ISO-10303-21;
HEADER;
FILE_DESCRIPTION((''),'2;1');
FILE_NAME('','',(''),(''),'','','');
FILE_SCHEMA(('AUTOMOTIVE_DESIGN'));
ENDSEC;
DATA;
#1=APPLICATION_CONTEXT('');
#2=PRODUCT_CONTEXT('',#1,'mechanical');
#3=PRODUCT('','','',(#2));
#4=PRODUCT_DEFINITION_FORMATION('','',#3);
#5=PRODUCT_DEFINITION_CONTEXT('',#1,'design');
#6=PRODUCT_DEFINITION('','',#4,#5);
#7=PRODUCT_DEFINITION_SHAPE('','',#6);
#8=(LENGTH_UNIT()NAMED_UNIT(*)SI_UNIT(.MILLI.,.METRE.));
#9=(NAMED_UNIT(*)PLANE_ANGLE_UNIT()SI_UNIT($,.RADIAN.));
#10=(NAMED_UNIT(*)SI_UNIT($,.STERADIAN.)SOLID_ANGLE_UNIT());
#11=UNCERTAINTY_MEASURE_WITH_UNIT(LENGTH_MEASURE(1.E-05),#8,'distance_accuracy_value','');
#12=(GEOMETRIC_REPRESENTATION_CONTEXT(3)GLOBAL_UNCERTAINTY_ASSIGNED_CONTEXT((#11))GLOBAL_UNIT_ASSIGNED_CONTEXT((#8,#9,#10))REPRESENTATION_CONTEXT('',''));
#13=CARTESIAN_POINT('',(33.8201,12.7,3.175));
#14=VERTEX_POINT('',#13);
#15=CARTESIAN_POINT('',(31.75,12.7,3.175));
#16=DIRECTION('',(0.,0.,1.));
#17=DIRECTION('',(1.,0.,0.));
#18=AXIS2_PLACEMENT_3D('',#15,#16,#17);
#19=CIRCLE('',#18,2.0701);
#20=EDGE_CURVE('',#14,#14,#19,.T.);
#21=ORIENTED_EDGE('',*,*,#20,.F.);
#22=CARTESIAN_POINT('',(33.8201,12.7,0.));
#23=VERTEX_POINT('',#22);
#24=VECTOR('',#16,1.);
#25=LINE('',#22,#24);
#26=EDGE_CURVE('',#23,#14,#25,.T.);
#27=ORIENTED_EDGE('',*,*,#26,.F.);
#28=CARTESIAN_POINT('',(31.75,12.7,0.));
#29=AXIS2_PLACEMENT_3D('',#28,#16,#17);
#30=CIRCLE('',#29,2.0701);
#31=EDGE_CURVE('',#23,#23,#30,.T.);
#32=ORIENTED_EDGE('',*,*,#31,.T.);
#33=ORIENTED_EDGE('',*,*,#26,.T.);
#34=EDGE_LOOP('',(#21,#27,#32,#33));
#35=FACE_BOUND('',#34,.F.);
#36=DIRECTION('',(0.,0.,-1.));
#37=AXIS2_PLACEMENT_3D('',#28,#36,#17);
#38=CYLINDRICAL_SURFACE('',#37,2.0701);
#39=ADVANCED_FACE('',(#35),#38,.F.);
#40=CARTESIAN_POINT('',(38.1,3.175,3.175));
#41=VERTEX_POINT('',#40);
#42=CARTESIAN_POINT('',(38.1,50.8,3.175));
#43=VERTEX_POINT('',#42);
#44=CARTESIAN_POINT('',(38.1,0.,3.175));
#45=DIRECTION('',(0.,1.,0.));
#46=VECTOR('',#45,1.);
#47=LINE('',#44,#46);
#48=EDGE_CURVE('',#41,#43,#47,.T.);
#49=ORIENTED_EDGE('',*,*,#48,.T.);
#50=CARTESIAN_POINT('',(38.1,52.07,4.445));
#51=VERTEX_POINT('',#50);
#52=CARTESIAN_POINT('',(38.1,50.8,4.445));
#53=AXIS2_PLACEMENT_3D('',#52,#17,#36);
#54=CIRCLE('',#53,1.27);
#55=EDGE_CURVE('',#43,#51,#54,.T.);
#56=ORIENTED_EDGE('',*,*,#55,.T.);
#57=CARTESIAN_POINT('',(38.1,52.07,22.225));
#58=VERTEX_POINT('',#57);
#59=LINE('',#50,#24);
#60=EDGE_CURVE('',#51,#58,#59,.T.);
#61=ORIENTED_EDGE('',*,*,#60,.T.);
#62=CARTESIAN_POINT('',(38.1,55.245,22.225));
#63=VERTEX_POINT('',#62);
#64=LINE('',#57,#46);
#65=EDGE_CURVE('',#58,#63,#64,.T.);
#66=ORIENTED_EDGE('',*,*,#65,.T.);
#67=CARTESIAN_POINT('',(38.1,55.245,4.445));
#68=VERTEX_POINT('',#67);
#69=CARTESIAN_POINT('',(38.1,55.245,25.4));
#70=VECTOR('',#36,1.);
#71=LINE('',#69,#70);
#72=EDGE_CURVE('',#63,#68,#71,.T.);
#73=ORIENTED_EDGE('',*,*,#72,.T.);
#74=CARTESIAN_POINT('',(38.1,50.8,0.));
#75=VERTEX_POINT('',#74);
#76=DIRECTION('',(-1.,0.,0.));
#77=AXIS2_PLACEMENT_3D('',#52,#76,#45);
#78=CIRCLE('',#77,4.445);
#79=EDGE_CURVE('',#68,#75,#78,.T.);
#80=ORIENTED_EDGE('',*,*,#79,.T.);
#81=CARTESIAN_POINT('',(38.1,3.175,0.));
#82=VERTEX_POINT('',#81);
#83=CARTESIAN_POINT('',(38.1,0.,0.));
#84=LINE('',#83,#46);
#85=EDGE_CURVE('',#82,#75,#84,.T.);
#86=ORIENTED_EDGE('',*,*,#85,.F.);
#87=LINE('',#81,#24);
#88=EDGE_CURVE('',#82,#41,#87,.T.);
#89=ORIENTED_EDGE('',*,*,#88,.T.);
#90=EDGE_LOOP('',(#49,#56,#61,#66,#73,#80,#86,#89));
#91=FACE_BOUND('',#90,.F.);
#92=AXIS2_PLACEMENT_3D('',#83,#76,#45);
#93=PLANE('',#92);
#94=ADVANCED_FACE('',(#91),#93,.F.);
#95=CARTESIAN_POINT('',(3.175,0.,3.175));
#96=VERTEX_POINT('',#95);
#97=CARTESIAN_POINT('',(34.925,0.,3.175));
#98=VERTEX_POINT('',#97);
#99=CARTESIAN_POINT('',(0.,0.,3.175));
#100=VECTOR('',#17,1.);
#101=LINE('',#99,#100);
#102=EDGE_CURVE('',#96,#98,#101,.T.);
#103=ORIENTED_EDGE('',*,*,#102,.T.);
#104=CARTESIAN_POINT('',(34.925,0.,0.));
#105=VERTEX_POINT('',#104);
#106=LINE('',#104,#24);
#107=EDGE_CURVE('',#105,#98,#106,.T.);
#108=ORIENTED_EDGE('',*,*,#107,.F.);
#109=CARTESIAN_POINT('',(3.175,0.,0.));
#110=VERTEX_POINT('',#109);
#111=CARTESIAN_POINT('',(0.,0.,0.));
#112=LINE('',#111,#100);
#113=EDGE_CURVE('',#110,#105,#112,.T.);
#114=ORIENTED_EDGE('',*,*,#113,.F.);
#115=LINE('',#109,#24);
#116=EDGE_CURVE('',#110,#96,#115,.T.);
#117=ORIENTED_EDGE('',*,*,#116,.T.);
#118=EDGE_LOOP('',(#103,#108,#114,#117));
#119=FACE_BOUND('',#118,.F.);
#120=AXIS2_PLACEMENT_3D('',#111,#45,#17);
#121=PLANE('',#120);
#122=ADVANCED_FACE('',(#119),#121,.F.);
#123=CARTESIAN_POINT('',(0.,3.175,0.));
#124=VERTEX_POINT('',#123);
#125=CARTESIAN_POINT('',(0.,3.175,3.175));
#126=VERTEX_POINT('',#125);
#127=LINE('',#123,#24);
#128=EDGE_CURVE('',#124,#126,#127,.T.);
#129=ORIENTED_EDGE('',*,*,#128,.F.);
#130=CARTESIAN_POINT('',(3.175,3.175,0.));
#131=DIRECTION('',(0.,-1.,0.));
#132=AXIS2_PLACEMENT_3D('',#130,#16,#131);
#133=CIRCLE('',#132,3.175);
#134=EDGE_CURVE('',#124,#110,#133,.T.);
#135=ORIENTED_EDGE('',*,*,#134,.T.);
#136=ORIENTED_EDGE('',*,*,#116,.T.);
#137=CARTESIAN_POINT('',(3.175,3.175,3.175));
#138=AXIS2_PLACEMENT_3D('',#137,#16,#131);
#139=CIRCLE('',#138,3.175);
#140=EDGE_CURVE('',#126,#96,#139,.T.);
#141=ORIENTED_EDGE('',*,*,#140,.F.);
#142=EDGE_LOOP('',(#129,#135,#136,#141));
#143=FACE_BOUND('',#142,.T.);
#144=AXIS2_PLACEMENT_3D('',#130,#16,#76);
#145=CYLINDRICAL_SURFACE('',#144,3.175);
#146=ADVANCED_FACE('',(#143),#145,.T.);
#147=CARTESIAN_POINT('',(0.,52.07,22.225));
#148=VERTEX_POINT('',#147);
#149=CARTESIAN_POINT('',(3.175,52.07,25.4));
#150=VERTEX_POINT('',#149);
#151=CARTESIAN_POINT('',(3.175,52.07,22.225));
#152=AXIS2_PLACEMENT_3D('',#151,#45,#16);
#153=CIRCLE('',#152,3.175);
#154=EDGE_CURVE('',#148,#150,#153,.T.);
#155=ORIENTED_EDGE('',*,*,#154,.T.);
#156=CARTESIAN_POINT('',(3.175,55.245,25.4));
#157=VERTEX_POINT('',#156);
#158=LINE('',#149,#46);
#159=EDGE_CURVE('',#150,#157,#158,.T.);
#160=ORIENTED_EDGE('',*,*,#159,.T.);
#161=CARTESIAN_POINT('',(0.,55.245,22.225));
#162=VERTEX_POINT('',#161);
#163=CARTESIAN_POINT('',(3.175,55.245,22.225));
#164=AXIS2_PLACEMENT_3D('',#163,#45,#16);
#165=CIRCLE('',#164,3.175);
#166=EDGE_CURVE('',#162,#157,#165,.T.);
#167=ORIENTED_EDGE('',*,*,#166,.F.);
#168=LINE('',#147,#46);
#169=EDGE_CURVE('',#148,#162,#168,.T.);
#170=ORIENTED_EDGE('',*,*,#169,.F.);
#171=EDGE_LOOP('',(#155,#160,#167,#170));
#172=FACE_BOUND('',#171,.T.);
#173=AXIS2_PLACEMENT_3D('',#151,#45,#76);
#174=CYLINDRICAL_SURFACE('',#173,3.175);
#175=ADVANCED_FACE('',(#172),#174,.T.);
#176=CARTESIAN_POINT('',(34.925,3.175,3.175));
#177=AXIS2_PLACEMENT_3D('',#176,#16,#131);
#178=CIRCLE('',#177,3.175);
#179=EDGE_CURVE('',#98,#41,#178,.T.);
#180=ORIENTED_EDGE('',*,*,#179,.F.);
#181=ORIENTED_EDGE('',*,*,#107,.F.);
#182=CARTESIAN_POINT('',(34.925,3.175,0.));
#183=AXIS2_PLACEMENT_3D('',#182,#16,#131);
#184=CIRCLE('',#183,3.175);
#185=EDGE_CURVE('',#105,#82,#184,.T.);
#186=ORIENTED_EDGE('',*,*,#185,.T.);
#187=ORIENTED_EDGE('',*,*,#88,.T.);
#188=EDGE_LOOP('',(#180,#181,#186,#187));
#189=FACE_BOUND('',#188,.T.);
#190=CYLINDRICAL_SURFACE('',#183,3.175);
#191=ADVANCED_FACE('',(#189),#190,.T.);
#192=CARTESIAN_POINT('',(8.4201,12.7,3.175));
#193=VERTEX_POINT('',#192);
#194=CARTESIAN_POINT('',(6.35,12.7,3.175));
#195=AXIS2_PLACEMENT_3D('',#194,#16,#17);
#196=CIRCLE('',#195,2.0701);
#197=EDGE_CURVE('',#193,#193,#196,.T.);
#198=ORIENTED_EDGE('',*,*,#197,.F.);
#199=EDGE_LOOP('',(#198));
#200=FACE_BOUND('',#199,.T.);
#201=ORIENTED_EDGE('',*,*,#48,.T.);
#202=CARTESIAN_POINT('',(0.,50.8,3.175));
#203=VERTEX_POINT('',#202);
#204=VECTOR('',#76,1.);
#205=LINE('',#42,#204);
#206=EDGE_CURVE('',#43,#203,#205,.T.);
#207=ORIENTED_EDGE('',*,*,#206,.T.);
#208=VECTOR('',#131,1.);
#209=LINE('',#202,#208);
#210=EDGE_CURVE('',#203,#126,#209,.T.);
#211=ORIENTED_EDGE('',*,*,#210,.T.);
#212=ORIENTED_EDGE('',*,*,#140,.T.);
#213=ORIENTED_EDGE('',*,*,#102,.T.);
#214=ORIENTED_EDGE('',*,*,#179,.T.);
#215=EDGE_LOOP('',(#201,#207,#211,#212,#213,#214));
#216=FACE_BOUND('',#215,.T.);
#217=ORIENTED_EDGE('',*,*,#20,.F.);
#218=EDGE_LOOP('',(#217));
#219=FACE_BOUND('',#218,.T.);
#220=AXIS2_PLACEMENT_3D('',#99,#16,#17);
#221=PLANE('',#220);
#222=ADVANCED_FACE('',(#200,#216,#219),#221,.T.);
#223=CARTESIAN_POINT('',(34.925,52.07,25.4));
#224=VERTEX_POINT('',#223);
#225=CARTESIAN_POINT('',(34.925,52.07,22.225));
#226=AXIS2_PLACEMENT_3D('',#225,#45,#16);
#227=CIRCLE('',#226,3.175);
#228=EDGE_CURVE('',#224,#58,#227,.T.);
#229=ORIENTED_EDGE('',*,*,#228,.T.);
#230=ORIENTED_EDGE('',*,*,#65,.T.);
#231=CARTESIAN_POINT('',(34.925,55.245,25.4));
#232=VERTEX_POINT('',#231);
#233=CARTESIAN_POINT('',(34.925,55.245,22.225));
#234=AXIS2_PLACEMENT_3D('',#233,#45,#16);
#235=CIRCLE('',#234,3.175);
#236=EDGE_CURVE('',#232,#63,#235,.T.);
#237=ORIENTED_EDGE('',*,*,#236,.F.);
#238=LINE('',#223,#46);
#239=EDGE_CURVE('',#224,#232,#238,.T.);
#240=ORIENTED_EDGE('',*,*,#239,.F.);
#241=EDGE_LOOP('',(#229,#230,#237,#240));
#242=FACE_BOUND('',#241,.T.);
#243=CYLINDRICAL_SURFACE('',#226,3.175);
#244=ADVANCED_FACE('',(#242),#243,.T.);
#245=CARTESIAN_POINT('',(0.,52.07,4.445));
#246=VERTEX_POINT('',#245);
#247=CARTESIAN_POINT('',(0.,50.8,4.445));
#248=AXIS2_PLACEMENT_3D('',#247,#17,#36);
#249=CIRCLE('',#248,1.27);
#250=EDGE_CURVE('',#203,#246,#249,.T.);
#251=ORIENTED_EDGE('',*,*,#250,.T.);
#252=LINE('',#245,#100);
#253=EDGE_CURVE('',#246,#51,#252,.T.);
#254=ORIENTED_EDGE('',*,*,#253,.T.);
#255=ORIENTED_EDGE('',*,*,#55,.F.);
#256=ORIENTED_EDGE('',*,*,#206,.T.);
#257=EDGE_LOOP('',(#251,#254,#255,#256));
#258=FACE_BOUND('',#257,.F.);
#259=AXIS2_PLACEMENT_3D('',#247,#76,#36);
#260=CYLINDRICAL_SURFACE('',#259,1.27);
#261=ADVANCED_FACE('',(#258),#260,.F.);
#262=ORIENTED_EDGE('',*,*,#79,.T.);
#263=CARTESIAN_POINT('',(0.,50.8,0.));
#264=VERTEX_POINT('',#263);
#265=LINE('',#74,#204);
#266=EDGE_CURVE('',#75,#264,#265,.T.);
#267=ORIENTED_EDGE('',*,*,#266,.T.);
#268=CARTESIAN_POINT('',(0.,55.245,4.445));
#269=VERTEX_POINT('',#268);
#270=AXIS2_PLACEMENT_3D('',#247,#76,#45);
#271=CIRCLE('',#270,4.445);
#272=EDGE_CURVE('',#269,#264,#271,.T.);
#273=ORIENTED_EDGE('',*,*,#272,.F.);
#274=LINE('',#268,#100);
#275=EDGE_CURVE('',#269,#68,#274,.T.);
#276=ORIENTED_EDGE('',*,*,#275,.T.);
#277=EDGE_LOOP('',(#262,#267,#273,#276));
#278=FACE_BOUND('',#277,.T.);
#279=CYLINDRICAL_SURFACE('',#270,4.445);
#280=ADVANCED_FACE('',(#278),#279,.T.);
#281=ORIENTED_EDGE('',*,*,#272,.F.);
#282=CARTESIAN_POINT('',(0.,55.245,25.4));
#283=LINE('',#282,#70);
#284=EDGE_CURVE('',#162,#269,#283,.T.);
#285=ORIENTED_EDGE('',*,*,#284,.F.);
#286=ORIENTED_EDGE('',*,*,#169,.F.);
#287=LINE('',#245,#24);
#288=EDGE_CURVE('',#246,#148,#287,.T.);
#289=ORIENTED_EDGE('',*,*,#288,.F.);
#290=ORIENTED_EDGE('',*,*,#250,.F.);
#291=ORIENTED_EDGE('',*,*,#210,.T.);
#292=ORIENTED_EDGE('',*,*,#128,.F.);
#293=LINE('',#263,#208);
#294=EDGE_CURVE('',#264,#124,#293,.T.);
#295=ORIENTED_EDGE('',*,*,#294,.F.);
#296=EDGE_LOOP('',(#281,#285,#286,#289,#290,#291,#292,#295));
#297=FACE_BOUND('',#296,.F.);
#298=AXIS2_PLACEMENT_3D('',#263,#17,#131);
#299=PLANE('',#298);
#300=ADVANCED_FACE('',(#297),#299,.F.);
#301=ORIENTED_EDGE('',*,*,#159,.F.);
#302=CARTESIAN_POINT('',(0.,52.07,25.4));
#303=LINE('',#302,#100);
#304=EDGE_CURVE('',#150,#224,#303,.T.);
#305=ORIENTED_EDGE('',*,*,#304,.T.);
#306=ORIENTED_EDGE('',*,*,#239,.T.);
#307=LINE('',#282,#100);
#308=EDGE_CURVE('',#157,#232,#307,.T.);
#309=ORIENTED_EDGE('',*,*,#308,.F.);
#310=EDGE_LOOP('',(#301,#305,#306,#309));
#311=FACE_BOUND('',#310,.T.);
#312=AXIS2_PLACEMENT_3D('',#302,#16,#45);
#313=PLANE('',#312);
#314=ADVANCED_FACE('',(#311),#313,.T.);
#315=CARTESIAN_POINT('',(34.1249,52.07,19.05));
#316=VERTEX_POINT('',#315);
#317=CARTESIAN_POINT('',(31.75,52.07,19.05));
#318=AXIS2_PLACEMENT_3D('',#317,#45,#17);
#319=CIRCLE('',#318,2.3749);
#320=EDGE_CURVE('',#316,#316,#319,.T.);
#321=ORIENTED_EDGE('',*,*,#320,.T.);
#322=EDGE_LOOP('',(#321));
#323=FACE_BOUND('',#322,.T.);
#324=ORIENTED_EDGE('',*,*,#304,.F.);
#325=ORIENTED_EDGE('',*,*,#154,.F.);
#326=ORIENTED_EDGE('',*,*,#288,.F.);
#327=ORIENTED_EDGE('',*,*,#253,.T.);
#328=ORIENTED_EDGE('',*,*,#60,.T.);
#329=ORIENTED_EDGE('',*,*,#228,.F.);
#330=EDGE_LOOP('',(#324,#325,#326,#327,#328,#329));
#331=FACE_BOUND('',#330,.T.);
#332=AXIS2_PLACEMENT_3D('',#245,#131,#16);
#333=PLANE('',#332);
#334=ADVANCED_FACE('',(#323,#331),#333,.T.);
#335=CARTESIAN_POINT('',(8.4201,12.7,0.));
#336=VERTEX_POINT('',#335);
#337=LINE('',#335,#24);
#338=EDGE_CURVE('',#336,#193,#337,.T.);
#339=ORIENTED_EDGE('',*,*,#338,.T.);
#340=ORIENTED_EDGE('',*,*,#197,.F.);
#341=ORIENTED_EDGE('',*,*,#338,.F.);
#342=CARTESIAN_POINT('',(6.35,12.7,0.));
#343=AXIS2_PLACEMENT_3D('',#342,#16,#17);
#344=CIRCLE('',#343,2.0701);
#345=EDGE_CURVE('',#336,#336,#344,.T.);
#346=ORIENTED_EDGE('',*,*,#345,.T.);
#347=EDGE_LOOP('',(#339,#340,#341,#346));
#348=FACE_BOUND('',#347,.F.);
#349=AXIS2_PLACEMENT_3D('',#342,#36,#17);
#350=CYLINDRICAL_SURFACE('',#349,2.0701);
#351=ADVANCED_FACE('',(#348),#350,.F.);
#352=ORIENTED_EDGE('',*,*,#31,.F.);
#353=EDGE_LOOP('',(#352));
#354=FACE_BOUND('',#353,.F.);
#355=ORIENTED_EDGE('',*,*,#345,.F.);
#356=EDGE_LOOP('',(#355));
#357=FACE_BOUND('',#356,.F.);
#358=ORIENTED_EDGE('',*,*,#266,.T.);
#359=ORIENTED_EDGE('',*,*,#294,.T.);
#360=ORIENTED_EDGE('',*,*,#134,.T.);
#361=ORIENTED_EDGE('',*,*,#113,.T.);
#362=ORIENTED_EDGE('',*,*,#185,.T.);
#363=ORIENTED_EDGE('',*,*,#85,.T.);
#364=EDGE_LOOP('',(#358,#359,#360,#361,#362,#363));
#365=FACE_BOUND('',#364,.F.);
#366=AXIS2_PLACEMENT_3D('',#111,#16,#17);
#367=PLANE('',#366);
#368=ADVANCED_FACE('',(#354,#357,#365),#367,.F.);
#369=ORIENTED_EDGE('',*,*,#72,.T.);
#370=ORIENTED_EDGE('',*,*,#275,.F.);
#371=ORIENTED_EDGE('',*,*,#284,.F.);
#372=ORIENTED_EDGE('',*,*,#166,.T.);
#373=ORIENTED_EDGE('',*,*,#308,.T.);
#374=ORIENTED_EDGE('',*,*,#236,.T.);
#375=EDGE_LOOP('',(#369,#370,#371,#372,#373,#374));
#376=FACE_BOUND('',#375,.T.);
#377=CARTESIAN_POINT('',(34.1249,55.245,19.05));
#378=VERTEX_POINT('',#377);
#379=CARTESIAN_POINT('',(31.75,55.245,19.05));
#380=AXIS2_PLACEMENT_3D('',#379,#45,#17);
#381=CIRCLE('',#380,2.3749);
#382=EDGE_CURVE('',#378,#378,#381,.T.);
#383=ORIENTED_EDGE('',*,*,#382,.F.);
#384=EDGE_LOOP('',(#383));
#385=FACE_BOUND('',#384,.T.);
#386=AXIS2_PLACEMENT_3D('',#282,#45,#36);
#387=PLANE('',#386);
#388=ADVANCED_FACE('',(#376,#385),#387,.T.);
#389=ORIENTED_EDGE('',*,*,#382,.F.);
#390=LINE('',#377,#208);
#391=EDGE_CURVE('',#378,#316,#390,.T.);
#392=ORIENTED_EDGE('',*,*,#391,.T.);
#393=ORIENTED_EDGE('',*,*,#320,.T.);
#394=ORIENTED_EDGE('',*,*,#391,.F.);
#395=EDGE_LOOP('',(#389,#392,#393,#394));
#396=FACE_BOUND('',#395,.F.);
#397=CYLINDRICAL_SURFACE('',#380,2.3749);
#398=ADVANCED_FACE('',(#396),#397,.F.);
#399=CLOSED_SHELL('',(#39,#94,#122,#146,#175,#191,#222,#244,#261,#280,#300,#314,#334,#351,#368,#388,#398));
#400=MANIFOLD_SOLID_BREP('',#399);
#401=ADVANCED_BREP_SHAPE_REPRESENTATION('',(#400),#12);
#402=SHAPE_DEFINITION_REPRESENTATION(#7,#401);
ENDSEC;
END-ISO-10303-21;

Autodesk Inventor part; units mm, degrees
ref_plane "YZ Plane" through (0, 0, 0) normal (1, 0, 0) x (0, 1, 0)
ref_plane "XZ Plane" through (0, 0, 0) normal (0, 1, 0) x (-1, 0, 0)
ref_plane "XY Plane" through (0, 0, 0) normal (0, 0, 1) x (1, 0, 0)
sketch "Sketch1" plane through (0, 0, 0) normal (0, 0, 1) x (1, 0, 0)
  line L0 (0, 0) -> (38.1, 0)
  line L1 (38.1, 0) -> (38.1, 50.8)
  line L2 (38.1, 50.8) -> (0, 50.8)
  line L3 (0, 50.8) -> (0, 0)
  circle A0 centre (6.35, 12.7) radius 2.0701
  line L4 (0, 12.7) -> (38.1, 12.7) construction
  circle A1 centre (31.75, 12.7) radius 2.0701
  dimension "d0" = 38.1
  dimension "d1" = 50.8
  dimension "d2" = 4.1402
  dimension "d3" = 6.35
  dimension "d6" = 25.4
  dimension "d22" = 12.7
extrude "Plate1" add sketch "Sketch1" along normal blind 3.175
sketch "Sketch2" plane through (0, 52.07, 4.445) normal (0, 1, 0) x (-1, 0, 0)
  line L0 (-38.1, 0) -> (0, 0)
  line L1 (0, 0) -> (0, 20.955)
  line L2 (0, 20.955) -> (-38.1, 20.955)
  line L3 (-38.1, 20.955) -> (-38.1, 0)
edge flange "Flange1" height 25.4 angle 90 thickness 3.175 bend radius 1.27 thickness toward (0, 1, 0) relief tear relief width 3.175 relief depth 1.5875 edges at (19.05, 50.8, 3.175) wall of the first edge with corners at (38.1, 52.07, 4.445) (0, 52.07, 4.445) (0, 52.07, 25.4) (38.1, 52.07, 25.4)
bend "Bend1"
corner "Corner1"
sketch "Sketch4" plane through (0, 55.245, 25.4) normal (0, 1, 0) x (1, 0, 0)
  line L0 (38.1, 0) -> (0, 0) projected
  line L1 (38.1, 20.955) -> (38.1, 0) projected
  circle A0 centre (31.75, 6.35) radius 2.3749
  point P0 (0, 25.4)
  dimension "d28" = 4.7498
  dimension "d29" = 6.35
  dimension "d30" = 6.35
extrude "Cut2" cut sketch "Sketch4" against normal blind 3.175
fillet "Fillet1" radius 3.175 4 edges at (38.1, 53.6575, 25.4) (0, 53.6575, 25.4) (38.1, 0, 1.5875) (0, 0, 1.5875)
equation "\"d31\" = Thickness"
equation "\"d12\" = BendReliefWidth"
equation "\"d13\" = BendReliefDepth"
equation "\"d14\" = MinimumRemnant"
equation "\"d15\" = BendRadius"
equation "\"d19\" = CornerReliefSize"
equation "\"d20\" = GapSize"
equation "\"d21\" = JacobiRadiusSize"
equation "\"BendRadius\" = Thickness"
equation "\"BendReliefWidth\" = Thickness"
equation "\"BendReliefDepth\" = 0.5 * Thickness"
equation "\"CornerReliefSize\" = 4 * Thickness"
equation "\"MinimumRemnant\" = 2 * Thickness"
equation "\"TransitionRadius\" = BendRadius"
equation "\"JacobiRadiusSize\" = BendRadius"
equation "\"GapSize\" = Thickness"
equation "\"d11\" = BendRadius"
equation "\"Thickness\" = 3.175"
properties part number "Pneumatic Piston Front Flange (Right Custom)" material "Aluminum 6061"
